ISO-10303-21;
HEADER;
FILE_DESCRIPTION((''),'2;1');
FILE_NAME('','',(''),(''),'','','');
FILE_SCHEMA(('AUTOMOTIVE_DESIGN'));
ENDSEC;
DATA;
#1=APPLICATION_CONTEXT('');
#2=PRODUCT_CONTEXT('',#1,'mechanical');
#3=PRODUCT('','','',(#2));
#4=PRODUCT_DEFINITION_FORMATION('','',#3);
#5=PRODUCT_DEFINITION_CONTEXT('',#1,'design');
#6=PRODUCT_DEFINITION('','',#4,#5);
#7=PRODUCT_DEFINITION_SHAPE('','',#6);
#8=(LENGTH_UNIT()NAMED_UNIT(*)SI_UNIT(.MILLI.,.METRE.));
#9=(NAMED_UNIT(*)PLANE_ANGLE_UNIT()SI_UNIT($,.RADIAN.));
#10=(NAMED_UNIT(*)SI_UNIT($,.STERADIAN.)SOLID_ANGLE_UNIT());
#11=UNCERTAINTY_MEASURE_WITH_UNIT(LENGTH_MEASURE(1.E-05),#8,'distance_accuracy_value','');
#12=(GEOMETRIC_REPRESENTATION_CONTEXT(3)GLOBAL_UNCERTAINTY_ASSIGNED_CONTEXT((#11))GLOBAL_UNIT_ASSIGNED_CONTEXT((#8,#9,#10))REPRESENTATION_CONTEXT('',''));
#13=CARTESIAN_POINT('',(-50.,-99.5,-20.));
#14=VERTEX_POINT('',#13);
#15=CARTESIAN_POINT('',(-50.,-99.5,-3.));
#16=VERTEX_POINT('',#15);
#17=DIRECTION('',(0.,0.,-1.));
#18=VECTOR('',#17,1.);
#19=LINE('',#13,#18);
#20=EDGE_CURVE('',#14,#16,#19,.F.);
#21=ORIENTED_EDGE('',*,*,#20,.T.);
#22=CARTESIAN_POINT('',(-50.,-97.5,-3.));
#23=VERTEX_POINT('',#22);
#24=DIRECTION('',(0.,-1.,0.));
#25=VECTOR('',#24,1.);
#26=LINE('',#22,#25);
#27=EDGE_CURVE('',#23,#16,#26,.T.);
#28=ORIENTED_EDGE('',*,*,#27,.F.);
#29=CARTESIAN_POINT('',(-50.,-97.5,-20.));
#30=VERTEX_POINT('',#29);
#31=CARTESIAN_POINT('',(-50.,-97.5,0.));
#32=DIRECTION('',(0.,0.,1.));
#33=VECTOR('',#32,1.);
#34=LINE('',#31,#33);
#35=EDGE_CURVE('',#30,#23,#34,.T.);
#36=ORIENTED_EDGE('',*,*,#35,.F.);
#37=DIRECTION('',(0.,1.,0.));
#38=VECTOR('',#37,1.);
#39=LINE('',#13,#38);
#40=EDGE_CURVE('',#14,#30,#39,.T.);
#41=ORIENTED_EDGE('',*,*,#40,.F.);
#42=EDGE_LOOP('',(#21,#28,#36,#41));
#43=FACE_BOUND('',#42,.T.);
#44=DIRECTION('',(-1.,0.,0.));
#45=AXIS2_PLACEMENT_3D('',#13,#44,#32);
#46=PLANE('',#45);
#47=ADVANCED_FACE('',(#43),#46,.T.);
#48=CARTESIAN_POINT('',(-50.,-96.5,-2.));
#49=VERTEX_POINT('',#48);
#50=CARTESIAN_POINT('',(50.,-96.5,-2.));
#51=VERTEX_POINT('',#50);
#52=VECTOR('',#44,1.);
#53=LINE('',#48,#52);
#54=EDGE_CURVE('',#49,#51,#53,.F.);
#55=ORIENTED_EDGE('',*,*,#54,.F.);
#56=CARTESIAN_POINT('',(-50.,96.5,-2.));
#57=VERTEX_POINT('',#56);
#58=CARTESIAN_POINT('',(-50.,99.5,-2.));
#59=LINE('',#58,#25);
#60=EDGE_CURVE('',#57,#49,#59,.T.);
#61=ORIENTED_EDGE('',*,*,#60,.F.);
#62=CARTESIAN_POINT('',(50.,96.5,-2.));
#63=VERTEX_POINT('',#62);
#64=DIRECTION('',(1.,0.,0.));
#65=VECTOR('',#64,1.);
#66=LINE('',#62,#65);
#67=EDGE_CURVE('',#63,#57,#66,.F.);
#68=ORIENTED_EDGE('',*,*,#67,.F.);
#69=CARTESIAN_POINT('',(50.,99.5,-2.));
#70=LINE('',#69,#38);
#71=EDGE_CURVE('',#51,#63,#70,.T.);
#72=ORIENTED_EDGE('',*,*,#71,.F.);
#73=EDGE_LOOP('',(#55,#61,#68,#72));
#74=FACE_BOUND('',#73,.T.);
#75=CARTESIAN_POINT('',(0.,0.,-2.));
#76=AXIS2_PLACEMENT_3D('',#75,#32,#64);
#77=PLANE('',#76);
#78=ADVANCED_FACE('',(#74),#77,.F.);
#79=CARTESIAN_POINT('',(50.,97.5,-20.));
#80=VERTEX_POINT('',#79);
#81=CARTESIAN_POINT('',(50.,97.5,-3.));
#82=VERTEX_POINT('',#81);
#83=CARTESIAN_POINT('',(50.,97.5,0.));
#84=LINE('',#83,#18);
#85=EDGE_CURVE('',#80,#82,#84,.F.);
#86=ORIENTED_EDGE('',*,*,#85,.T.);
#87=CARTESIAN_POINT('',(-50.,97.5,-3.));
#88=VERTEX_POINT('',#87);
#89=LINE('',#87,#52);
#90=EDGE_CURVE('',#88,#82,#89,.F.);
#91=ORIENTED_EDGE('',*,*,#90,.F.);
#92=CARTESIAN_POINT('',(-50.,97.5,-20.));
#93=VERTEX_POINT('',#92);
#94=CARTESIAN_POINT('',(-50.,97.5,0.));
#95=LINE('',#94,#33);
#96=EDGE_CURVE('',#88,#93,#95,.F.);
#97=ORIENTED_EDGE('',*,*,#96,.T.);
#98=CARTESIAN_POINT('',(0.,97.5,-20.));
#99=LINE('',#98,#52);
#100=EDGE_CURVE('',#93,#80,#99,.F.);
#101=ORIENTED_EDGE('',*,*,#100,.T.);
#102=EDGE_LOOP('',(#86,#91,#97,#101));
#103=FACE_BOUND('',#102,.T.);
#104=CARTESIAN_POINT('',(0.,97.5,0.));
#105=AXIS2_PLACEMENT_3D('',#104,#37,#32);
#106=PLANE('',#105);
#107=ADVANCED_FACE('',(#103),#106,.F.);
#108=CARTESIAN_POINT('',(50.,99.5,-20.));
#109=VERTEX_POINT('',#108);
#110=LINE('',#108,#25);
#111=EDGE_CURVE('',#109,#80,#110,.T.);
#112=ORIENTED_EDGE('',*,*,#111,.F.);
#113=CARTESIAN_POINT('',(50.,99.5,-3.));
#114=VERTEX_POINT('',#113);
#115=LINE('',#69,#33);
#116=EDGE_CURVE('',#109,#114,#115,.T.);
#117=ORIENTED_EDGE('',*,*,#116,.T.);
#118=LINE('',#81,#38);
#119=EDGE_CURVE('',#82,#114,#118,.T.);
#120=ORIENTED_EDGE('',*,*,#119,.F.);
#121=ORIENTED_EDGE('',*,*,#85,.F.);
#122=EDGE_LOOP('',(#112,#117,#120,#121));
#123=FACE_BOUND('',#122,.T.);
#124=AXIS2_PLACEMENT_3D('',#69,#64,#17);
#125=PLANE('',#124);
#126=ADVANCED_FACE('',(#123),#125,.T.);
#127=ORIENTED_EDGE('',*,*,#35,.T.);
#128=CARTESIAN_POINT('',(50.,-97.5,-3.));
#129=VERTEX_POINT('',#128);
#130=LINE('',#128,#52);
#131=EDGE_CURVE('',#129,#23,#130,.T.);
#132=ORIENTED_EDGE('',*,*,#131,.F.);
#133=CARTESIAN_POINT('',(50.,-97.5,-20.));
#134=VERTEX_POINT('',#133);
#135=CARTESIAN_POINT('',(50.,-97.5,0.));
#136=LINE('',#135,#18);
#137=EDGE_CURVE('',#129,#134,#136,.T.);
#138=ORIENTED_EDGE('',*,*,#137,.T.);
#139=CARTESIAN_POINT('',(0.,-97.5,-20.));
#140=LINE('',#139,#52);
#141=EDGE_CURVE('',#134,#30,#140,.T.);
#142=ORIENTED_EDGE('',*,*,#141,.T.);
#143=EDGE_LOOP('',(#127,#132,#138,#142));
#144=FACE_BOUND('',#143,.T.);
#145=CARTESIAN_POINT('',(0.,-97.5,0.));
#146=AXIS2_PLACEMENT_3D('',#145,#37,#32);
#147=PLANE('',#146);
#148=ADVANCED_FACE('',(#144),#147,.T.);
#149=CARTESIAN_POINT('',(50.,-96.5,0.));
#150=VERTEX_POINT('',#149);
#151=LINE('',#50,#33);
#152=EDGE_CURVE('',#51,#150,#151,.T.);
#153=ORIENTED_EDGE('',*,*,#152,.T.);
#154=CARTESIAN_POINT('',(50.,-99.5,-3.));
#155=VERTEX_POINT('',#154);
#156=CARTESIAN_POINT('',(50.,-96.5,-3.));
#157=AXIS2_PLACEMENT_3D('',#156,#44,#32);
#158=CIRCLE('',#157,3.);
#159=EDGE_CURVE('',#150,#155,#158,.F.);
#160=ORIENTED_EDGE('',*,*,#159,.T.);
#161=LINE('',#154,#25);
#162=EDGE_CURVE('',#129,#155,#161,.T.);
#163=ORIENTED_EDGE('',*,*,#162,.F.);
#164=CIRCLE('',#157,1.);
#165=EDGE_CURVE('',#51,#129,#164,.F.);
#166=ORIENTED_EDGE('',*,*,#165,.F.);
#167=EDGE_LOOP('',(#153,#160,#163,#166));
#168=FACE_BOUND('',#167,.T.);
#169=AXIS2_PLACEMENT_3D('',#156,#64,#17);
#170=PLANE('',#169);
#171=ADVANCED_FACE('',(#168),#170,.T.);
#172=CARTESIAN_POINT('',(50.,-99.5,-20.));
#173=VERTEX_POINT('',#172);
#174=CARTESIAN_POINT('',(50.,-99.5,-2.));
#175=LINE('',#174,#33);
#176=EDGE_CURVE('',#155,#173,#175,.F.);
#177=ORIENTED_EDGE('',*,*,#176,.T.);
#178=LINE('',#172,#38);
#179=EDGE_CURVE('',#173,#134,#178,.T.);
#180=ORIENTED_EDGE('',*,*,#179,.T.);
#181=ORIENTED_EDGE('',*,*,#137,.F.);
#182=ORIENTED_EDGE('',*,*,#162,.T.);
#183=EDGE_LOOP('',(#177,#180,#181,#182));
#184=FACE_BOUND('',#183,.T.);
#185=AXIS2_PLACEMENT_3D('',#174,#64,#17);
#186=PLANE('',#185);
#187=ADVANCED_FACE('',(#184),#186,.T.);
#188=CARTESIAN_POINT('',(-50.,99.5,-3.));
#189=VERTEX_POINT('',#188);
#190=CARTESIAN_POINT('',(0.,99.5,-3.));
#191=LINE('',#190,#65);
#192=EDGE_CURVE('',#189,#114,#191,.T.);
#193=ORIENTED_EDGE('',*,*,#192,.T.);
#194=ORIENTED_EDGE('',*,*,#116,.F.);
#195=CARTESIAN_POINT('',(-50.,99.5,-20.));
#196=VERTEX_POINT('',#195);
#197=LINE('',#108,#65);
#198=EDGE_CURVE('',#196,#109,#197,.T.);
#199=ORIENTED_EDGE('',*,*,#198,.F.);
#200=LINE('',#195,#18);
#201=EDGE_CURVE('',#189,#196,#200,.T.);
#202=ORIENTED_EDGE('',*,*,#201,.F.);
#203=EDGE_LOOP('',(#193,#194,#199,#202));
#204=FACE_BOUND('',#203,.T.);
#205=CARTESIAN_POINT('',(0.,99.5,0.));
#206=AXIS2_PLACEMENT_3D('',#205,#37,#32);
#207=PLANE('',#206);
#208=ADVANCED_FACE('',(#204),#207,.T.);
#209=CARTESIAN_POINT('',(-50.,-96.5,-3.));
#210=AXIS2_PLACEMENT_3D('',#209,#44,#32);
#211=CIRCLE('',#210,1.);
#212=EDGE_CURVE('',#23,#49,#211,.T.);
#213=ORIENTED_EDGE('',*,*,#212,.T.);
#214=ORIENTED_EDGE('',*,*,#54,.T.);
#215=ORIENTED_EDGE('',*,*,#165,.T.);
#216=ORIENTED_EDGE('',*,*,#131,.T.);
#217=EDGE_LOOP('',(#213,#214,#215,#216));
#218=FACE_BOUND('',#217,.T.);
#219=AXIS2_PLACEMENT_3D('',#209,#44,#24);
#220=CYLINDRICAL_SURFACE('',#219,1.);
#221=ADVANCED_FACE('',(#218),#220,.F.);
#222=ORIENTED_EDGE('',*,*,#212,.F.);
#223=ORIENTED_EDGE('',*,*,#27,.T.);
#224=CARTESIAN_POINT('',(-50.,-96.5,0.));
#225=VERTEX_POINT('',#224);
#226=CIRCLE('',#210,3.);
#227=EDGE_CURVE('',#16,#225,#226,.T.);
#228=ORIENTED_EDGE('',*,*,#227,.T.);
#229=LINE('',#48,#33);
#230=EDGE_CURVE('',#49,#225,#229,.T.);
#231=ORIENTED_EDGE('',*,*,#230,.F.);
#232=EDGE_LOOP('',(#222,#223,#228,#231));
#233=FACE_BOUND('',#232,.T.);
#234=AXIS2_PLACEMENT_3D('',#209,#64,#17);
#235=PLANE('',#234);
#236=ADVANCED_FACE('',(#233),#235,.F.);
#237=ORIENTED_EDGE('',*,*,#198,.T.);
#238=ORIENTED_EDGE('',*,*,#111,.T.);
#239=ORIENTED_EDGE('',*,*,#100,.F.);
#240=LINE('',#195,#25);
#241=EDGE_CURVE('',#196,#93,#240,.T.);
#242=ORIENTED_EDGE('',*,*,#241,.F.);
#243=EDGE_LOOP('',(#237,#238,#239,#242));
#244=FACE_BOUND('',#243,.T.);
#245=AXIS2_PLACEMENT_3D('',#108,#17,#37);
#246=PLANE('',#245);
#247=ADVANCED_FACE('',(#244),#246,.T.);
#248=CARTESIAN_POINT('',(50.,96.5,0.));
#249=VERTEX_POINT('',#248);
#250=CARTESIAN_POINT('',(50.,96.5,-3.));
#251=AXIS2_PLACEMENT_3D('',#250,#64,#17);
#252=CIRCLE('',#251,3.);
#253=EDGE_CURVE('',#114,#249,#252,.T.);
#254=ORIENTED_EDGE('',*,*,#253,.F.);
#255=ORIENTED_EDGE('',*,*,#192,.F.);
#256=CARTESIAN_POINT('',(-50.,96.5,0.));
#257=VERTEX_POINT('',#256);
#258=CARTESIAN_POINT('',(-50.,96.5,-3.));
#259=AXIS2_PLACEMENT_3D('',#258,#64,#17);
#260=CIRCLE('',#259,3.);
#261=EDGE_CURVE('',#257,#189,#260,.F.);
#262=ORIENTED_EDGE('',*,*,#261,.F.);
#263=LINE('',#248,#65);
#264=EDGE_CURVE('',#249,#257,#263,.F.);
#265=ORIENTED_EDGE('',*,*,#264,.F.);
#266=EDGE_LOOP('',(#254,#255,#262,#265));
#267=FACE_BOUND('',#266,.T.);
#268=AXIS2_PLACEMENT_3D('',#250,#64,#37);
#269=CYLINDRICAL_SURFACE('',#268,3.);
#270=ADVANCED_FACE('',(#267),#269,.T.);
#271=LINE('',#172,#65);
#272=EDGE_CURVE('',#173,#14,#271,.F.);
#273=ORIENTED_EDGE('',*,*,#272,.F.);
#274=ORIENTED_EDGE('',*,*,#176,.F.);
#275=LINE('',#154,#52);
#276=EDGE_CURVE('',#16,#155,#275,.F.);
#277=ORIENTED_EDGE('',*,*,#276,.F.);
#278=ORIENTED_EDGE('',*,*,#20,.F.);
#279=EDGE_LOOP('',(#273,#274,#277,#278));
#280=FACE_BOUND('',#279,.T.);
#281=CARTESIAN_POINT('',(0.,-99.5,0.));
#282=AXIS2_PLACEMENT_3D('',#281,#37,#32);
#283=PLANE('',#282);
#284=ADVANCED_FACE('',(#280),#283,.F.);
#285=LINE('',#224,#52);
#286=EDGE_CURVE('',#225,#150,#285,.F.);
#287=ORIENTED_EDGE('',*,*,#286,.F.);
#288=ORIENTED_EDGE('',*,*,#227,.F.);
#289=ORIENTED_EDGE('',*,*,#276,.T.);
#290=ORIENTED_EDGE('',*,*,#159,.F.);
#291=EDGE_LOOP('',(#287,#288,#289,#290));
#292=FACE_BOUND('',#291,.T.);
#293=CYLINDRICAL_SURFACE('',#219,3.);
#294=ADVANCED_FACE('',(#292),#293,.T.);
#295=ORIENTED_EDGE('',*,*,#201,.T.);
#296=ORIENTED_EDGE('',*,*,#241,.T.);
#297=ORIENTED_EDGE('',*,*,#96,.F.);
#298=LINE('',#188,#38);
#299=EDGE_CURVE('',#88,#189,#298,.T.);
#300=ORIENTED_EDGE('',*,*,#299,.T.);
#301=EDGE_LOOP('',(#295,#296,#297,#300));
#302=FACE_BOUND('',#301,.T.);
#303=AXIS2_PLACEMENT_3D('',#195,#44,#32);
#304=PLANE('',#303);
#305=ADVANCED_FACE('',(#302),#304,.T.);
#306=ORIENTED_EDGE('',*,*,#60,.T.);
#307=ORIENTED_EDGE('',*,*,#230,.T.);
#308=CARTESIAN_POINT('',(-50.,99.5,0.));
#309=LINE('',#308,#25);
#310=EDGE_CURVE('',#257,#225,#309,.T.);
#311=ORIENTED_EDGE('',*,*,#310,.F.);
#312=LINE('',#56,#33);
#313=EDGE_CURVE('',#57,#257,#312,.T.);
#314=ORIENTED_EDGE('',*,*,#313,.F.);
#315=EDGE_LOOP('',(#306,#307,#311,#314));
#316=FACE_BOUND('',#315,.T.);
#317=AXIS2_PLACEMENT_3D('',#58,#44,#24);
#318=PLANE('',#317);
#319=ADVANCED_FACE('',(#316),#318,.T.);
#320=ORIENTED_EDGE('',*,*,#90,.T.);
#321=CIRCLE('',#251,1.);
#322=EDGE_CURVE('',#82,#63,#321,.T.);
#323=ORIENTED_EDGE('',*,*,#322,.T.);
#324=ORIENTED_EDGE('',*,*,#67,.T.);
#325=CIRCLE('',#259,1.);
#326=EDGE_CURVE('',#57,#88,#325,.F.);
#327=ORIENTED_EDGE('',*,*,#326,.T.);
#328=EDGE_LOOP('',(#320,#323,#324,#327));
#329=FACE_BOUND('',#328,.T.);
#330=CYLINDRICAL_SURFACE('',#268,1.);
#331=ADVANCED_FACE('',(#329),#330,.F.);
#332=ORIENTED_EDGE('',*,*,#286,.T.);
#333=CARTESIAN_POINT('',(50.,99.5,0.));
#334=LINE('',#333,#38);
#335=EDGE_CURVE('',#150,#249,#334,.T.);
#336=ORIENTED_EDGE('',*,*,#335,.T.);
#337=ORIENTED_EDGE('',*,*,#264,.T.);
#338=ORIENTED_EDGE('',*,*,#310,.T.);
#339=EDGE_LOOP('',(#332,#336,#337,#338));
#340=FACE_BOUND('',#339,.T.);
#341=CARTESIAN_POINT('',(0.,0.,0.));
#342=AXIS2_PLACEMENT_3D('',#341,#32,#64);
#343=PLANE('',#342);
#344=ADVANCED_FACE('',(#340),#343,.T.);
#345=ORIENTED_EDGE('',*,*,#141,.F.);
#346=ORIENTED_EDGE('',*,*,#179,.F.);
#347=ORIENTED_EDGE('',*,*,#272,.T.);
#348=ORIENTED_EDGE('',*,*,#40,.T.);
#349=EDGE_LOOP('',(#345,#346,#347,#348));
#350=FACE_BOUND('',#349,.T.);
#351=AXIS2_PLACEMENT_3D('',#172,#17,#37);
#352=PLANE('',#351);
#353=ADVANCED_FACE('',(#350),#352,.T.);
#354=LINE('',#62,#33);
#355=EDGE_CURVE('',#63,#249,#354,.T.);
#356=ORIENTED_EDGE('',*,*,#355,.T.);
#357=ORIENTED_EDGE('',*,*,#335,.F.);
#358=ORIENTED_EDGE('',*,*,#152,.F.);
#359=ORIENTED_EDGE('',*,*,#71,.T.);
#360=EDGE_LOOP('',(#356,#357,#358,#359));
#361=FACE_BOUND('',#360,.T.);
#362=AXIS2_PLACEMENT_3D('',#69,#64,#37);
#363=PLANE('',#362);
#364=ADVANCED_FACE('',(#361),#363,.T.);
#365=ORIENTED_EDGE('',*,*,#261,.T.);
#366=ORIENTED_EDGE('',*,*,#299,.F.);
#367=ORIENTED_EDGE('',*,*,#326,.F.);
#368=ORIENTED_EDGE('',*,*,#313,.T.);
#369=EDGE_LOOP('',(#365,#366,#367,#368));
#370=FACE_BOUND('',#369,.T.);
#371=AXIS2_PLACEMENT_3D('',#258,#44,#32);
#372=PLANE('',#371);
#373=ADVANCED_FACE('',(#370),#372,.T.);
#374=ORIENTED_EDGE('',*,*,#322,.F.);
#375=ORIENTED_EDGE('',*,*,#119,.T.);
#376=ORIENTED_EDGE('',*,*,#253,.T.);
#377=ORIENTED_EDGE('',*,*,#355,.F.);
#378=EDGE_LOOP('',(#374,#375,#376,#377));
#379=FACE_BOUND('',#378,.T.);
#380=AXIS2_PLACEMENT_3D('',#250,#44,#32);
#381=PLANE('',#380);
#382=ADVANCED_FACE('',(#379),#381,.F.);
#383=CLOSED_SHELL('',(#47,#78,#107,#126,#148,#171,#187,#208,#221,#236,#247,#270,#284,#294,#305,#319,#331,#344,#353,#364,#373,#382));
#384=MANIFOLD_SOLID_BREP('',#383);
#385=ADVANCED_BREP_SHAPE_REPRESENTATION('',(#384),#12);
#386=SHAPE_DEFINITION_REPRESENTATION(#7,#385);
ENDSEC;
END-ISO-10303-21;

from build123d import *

# Parameters (mm, degrees)
SKETCH_1_W                         = 100
SKETCH_1_H                         = 199
SM_BASE_FLANGE_1_DEPTH             = 2
SM_EDGE_FLANGE_1_STRIP_W           = 10
SM_EDGE_FLANGE_1_STRIP_H           = 2
SM_EDGE_FLANGE_1_STRIP_CUT_DEPTH   = 100
SM_EDGE_FLANGE_1_STRIP_2_W         = 10
SM_EDGE_FLANGE_1_STRIP_2_H         = 2
SM_EDGE_FLANGE_1_STRIP_CUT_2_DEPTH = 100
SM_EDGE_FLANGE_1_DEPTH             = 100
SM_EDGE_FLANGE_1_BEND_DEPTH        = 100


# Sheet-metal steps are written as plain solids
with BuildPart() as part:
    # Sketch 1 → 基体-法兰1 (new body)
    with BuildSketch(Plane.XY):
        Rectangle(SKETCH_1_W, SKETCH_1_H)
    extrude(amount=-SM_BASE_FLANGE_1_DEPTH)

    # 边线-法兰1 strip (across the edge) → 边线-法兰1 strip cut (cut)
    with BuildSketch(Plane(origin=(-50, 99.5, -2), x_dir=(0, -1, 0), z_dir=(1, 0, 0))):
        with Locations((-2, -1)):
            Rectangle(SM_EDGE_FLANGE_1_STRIP_W, SM_EDGE_FLANGE_1_STRIP_H)
    extrude(amount=SM_EDGE_FLANGE_1_STRIP_CUT_DEPTH, mode=Mode.SUBTRACT)

    # 边线-法兰1 strip 2 (across the edge) → 边线-法兰1 strip cut 2 (cut)
    with BuildSketch(Plane(origin=(50, -99.5, -2), x_dir=(0, 1, 0), z_dir=(-1, 0, 0))):
        with Locations((-2, -1)):
            Rectangle(SM_EDGE_FLANGE_1_STRIP_2_W, SM_EDGE_FLANGE_1_STRIP_2_H)
    extrude(amount=SM_EDGE_FLANGE_1_STRIP_CUT_2_DEPTH, mode=Mode.SUBTRACT)

    # 边线-法兰1 section (across the edge) → 边线-法兰1 (add)
    with BuildSketch(Plane(origin=(-50, 99.5, -2), x_dir=(0, -1, 0), z_dir=(1, 0, 0))):
        with BuildLine():
            Line((0, 1), (0, 18))
            Line((0, 18), (2, 18))
            Line((2, 18), (2, 1))
            ThreePointArc((2, 1), (2.292893219, 0.292893219), (3, 0))
            Line((3, 0), (3, -2))
            ThreePointArc((3, -2), (0.878679656, -1.121320344), (0, 1))
        make_face()
    extrude(amount=SM_EDGE_FLANGE_1_DEPTH)

    # 边线-法兰1 section 2 (across the edge) → 边线-法兰1 bend (add)
    with BuildSketch(Plane(origin=(50, -99.5, -2), x_dir=(0, 1, 0), z_dir=(-1, 0, 0))):
        with BuildLine():
            Line((0, 1), (0, 18))
            Line((0, 18), (2, 18))
            Line((2, 18), (2, 1))
            ThreePointArc((2, 1), (2.292893219, 0.292893219), (3, 0))
            Line((3, 0), (3, -2))
            ThreePointArc((3, -2), (0.878679656, -1.121320344), (0, 1))
        make_face()
    extrude(amount=SM_EDGE_FLANGE_1_BEND_DEPTH)


solid = part.part
